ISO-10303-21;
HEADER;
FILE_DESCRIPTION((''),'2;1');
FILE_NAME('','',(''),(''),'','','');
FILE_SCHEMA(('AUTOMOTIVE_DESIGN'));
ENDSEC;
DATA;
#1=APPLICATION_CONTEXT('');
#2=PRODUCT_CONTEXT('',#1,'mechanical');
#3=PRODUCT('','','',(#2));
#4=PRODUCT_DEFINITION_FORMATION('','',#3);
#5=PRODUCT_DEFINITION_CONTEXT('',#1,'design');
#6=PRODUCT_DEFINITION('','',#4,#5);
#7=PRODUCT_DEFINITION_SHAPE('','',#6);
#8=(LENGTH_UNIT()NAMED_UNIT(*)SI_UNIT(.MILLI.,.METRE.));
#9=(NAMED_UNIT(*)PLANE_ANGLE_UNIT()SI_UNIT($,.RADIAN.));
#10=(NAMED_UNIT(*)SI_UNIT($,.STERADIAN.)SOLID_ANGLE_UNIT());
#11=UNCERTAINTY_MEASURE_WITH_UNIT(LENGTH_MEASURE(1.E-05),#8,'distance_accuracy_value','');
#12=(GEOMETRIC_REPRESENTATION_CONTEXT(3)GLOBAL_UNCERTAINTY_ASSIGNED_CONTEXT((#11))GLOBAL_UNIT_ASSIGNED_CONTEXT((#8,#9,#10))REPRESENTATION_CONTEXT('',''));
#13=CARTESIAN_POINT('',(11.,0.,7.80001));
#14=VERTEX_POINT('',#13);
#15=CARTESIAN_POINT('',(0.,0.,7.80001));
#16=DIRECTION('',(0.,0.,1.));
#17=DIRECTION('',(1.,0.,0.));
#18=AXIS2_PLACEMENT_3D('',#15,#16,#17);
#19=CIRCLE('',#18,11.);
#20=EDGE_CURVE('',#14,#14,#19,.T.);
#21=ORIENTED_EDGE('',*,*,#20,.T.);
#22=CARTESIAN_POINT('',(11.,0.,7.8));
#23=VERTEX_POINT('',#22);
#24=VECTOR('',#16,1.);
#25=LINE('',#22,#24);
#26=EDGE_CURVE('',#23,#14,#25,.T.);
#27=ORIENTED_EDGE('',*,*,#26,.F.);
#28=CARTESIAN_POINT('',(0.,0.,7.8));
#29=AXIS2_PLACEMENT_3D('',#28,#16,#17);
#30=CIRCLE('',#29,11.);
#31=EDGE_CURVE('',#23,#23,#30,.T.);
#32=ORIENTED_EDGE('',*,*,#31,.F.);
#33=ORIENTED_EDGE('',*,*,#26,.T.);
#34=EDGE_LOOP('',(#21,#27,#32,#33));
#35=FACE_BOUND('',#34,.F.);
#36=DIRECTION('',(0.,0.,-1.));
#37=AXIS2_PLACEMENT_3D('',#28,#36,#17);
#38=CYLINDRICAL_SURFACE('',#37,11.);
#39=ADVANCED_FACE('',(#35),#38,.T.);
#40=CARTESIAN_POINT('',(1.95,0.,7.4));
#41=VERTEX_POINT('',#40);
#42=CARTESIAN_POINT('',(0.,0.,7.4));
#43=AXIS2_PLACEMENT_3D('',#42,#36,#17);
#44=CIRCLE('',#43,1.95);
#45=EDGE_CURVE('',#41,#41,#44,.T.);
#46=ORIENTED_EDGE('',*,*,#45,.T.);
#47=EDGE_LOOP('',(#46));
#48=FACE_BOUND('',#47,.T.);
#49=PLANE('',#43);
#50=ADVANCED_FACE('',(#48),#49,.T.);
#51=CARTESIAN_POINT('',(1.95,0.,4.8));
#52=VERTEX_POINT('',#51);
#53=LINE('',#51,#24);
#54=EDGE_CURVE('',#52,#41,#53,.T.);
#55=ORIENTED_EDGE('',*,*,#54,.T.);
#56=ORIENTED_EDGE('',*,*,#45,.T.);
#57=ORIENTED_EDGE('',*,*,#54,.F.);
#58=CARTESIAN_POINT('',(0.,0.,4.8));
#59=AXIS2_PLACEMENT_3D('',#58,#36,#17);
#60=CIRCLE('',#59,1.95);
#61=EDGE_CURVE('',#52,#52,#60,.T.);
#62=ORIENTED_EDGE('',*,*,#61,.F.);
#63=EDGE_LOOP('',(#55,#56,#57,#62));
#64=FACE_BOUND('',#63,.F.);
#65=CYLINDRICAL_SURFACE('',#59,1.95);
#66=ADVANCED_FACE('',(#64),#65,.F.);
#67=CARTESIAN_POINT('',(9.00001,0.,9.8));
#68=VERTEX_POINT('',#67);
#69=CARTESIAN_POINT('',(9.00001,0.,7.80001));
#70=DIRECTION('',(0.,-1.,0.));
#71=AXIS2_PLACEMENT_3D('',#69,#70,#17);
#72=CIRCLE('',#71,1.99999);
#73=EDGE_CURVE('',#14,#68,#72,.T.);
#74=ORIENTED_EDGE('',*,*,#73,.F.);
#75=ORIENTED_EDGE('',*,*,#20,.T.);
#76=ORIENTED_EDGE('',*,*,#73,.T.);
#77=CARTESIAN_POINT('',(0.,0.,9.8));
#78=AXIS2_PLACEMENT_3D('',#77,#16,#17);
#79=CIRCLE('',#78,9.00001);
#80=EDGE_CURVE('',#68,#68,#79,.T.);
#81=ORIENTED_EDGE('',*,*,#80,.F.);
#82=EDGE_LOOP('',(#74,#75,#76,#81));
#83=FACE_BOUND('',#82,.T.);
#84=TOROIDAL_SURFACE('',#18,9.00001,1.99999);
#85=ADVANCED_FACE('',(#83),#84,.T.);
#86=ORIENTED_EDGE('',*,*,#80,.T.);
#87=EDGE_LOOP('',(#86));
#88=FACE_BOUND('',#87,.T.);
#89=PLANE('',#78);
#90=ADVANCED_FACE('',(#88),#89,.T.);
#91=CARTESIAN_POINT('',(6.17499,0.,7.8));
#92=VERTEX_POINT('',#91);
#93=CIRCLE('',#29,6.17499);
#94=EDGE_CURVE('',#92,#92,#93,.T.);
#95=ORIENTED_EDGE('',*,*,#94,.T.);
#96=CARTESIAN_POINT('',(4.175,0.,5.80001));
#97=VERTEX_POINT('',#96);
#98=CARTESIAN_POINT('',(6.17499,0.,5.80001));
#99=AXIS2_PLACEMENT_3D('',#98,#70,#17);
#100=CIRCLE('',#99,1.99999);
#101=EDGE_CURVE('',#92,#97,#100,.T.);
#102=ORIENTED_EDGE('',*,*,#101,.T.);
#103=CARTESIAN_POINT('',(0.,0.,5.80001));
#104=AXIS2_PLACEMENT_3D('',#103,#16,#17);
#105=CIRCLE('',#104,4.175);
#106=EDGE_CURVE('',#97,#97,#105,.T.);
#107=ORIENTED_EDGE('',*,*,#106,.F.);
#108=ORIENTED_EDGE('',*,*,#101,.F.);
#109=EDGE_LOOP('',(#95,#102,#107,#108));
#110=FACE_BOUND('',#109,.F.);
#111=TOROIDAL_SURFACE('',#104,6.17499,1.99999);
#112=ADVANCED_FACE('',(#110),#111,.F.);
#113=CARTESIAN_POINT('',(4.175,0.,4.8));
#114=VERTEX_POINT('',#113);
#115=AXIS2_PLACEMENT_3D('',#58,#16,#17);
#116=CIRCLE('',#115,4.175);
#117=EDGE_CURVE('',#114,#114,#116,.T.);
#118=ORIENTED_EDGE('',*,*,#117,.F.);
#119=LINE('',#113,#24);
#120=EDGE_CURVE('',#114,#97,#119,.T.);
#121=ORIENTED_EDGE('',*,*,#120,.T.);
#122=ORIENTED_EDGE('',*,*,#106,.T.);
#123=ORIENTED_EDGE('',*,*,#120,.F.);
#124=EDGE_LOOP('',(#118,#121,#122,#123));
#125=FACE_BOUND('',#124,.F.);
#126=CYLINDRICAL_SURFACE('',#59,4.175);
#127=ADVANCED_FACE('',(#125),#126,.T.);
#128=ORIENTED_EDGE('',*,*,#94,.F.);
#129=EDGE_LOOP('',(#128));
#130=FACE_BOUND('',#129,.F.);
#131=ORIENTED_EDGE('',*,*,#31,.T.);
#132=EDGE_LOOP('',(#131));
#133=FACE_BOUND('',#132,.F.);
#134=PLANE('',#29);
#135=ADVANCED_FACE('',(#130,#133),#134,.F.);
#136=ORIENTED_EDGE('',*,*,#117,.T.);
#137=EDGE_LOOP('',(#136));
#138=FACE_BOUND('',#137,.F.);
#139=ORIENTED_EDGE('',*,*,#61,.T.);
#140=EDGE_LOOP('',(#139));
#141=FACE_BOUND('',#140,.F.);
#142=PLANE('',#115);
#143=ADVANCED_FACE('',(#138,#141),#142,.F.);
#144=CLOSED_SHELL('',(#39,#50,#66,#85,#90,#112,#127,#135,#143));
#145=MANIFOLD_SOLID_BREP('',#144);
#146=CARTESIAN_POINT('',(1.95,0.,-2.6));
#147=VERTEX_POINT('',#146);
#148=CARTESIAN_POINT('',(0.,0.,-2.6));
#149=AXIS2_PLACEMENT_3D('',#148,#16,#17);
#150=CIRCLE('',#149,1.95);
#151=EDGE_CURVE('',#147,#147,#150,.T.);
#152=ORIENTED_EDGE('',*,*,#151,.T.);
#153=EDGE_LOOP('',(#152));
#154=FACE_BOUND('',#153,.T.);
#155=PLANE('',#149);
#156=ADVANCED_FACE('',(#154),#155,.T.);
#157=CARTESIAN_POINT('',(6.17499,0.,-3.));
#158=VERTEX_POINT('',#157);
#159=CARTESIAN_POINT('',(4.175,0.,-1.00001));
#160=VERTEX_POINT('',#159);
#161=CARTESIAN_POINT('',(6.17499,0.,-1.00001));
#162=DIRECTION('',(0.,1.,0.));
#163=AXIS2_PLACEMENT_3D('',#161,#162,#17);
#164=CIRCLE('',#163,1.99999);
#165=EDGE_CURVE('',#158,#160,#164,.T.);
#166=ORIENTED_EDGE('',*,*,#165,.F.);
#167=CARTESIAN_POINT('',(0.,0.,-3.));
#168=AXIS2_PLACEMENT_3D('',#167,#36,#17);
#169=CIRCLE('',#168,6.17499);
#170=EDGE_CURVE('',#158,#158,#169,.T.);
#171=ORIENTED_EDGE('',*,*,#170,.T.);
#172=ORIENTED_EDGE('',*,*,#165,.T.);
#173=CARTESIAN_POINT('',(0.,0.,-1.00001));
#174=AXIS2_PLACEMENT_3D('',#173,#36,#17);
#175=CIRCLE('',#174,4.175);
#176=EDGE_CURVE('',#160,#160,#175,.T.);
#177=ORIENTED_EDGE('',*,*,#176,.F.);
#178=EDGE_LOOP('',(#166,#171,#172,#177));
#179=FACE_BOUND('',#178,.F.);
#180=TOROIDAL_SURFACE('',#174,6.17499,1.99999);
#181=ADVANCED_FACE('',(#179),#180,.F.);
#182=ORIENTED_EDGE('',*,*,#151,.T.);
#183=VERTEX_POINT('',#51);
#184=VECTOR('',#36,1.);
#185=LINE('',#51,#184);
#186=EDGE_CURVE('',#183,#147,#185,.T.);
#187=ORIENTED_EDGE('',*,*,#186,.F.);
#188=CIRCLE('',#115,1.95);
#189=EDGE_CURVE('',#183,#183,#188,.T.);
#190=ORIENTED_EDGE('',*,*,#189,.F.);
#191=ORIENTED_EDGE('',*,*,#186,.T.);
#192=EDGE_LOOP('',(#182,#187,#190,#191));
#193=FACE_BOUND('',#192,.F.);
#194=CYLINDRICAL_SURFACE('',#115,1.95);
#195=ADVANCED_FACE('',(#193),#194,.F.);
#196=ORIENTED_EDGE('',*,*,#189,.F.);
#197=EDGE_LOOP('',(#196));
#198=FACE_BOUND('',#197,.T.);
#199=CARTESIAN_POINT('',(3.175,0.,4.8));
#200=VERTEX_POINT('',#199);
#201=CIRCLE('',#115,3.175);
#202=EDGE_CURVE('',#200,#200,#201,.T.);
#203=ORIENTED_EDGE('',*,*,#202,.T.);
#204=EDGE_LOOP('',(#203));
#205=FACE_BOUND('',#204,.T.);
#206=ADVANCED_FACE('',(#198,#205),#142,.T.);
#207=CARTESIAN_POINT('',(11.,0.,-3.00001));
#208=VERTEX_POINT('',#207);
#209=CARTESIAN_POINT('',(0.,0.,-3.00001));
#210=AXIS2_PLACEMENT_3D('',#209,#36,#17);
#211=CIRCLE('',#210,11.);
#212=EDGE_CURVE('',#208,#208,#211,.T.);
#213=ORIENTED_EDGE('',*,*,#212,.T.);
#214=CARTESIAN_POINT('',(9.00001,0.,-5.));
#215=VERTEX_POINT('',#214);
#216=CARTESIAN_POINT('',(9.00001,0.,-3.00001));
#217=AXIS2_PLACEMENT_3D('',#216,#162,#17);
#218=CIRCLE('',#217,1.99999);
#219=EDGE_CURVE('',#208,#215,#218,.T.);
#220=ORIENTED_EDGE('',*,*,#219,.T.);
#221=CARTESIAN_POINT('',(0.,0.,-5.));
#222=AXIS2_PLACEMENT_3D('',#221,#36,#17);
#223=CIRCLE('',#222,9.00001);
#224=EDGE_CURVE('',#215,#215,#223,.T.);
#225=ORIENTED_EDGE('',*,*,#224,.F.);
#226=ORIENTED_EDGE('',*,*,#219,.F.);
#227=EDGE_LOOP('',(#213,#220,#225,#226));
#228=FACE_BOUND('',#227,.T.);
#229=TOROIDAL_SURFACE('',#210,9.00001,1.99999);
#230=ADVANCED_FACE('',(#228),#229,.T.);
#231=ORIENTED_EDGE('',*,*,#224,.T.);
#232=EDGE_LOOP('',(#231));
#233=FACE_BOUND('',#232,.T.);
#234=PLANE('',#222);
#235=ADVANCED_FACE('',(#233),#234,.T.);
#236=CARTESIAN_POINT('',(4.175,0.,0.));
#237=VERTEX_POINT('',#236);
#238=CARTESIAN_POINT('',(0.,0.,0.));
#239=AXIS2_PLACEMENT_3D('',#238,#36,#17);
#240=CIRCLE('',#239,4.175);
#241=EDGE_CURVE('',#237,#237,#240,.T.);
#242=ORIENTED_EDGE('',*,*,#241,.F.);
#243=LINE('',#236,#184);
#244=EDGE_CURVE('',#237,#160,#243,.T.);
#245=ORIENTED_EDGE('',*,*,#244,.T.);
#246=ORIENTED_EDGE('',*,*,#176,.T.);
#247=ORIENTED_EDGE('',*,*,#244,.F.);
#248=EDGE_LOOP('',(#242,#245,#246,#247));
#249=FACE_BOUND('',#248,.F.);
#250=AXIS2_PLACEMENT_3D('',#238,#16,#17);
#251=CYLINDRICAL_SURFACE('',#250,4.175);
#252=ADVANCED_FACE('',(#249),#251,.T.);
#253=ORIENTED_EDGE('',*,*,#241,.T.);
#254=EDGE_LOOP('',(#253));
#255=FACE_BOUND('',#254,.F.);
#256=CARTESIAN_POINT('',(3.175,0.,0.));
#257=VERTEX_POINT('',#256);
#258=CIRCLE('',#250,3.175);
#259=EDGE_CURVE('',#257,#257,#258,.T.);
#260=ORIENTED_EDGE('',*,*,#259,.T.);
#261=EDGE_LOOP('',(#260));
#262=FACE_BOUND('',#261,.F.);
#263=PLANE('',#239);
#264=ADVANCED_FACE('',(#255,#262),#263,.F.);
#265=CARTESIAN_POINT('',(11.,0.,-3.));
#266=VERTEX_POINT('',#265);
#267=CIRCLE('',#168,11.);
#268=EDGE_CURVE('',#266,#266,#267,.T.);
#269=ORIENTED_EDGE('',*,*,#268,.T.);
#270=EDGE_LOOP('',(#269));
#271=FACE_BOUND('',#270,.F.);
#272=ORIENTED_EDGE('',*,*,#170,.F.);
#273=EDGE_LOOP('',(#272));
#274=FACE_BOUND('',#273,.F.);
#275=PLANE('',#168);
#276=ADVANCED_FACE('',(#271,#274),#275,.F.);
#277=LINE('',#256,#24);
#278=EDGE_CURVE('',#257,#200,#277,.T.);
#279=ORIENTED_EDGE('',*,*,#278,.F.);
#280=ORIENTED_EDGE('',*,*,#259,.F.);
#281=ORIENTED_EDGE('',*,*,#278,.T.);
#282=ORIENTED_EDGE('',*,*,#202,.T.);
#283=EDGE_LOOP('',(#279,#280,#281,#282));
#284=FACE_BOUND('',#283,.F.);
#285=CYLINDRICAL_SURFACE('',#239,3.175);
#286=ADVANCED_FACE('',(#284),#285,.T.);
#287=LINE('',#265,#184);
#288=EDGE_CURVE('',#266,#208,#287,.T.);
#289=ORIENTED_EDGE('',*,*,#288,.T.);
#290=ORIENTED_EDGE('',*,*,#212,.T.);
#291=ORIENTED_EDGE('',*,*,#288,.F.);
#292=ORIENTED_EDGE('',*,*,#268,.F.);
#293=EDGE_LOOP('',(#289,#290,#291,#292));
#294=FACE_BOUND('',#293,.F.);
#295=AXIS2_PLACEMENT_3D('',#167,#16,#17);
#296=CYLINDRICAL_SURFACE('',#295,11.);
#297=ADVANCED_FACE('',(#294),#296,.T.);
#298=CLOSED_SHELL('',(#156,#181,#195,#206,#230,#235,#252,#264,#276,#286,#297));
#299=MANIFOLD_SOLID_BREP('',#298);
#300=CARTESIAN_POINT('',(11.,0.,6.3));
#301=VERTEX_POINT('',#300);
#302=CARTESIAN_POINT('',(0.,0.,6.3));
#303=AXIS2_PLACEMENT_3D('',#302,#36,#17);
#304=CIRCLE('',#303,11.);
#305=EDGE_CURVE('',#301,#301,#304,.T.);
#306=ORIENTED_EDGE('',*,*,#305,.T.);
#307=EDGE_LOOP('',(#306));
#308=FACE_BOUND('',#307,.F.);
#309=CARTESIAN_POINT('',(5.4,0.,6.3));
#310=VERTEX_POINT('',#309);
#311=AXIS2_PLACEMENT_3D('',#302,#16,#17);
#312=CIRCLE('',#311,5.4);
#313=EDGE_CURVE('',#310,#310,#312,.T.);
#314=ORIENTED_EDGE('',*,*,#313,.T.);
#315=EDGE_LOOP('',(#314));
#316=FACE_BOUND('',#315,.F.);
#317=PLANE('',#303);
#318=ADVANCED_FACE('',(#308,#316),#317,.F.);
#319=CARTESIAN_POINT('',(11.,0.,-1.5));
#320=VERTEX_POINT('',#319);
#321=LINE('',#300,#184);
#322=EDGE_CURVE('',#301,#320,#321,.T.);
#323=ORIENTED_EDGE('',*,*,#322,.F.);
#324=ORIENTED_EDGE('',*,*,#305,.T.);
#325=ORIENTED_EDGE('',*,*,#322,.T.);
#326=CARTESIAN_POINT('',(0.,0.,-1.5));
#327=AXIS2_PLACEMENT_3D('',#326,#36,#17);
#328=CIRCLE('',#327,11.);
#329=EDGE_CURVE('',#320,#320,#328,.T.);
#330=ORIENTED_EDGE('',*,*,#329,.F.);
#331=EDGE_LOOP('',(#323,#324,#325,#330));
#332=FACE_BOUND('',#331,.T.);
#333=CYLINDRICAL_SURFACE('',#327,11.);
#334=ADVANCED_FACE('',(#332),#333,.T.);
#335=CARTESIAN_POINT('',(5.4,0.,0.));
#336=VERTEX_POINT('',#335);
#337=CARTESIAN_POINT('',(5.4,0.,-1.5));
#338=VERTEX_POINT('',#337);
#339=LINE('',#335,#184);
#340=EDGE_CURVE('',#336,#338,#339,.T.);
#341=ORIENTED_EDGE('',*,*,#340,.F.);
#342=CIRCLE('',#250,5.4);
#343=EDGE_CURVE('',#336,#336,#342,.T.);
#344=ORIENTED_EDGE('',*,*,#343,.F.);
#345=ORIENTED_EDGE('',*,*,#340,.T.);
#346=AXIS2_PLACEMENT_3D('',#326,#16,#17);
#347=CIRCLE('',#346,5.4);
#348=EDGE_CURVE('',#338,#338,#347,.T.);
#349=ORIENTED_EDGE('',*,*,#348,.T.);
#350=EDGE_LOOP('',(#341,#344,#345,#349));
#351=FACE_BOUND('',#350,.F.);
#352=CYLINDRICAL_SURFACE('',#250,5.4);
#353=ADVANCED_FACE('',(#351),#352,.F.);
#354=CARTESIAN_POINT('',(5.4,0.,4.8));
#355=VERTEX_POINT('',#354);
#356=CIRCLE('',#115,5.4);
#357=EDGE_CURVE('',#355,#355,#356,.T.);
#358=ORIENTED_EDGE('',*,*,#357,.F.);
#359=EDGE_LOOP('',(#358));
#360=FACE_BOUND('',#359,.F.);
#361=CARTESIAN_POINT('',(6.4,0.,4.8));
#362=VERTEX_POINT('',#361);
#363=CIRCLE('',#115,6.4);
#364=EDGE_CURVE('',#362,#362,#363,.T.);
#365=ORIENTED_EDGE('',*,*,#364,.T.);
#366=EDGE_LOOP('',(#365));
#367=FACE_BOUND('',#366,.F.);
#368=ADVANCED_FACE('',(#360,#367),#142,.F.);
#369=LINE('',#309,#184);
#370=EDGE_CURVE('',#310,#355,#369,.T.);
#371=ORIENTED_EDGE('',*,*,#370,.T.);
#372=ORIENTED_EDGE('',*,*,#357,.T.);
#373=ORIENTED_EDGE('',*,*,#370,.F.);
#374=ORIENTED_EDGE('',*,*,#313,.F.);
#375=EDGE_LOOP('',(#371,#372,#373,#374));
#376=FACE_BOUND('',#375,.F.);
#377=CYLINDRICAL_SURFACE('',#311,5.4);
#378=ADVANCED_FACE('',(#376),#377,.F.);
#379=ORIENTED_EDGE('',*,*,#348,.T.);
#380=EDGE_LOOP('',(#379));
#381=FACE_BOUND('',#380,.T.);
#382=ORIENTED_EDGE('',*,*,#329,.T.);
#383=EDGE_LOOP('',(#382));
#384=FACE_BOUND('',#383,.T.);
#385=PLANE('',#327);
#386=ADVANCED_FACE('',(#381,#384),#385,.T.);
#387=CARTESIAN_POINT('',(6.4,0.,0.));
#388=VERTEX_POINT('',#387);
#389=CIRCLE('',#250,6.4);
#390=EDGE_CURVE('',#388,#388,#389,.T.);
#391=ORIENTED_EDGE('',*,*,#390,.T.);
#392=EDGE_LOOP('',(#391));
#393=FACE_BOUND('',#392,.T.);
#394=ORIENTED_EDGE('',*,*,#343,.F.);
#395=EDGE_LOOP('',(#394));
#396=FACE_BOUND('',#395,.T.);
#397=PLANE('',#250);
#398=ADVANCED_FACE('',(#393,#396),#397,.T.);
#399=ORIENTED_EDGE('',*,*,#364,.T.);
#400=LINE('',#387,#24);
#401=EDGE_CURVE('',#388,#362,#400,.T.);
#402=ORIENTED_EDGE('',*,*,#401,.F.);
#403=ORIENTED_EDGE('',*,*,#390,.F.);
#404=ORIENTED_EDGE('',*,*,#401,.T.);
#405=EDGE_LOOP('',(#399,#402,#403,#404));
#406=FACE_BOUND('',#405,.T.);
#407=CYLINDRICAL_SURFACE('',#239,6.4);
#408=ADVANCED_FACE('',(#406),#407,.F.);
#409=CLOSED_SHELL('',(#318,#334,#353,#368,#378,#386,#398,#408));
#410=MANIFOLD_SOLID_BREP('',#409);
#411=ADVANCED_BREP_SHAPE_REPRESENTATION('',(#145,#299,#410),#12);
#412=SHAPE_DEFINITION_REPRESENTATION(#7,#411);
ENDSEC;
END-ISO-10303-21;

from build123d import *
from build123d import SkipClean  # not in build123d's __all__

# Parameters (mm, degrees)
F0_R      = 5.4
F1_DEPTH  = 1.5
F2_R      = 8.4
F2_R_2    = 6.4
F3_DEPTH  = 4.8
F4_R      = 11
F4_R_2    = 8.4
F5_DEPTH  = 7.8
F6_R      = 11
F6_R_2    = 5.4
F7_DEPTH  = 1.5
F8_R      = 3.175
F9_DEPTH  = 4.8
F10_R     = 4.175
F11_DEPTH = 3
F12_R     = 11
F13_DEPTH = 2
F14_R     = 1.95
F15_DEPTH = 7.4
F16_R     = 1.99999
F17_R     = 4.175
F18_DEPTH = 3
F19_R     = 11
F20_DEPTH = 2
F21_R     = 1.95
F22_DEPTH = 2.6
F23_R     = 1.99999


# Not quite as in the source:
# - a fillet or chamfer is up to 0.001 mm smaller than in the source, because OpenCascade refuses the exact size


with BuildPart() as f1:
    # F0 (on Top) → F1 (new body)
    with BuildSketch(Plane.XY):
        with BuildLine():
            ThreePointArc((2.5007633588, 8.0191135809), (0, 8.4), (-2.5007633588, 8.0191135809))
            ThreePointArc((-2.5007633588, 8.0191135809), (-7.2746133918, 4.2), (-8.1951377563, -1.8438321929))
            ThreePointArc((-8.1951377563, -1.8438321929), (-7.2746133918, -4.2), (-5.6943743975, -6.175281388))
            ThreePointArc((-5.6943743975, -6.175281388), (0, -8.4), (5.6943743975, -6.175281388))
            ThreePointArc((5.6943743975, -6.175281388), (7.2746133918, -4.2), (8.1951377563, -1.8438321929))
            ThreePointArc((8.1951377563, -1.8438321929), (7.2746133918, 4.2), (2.5007633588, 8.0191135809))
        make_face()
        Circle(F0_R, mode=Mode.SUBTRACT)
    extrude(amount=-F1_DEPTH)

    # F2 (on face) → F3 (join)
    with BuildSketch(Plane.XY):
        Circle(F2_R)
        Circle(F2_R_2, mode=Mode.SUBTRACT)
    with SkipClean():  # cleaning this boolean's faces spoils the solid; the shape is the same uncleaned
        extrude(amount=F3_DEPTH)



with BuildPart() as f5:
    # F4 (on face) → F5 (new body)
    with BuildSketch(Plane(origin=(0, 0, -1.5), x_dir=(1, 0, 0), z_dir=(0, 0, -1))):
        Circle(F4_R)
        Circle(F4_R_2, mode=Mode.SUBTRACT)
    extrude(amount=-F5_DEPTH)


with BuildPart() as f1_1:
    add(f1.part, clean=False)

    add(f5.part)  # F7 merges F5
    # F6 (on face) → F7 (join)
    with BuildSketch(Plane.XY.offset(6.3)):
        Circle(F6_R)
        Circle(F6_R_2, mode=Mode.SUBTRACT)
    extrude(amount=-F7_DEPTH)


with BuildPart() as f9:
    # F8 (on face) → F9 (new body)
    with BuildSketch(Plane.XY):
        Circle(F8_R)
    extrude(amount=F9_DEPTH)

    # F10 (on face) → F11 (join, through all)
    with BuildSketch(Plane(origin=(0, 0, 0), x_dir=(1, 0, 0), z_dir=(0, 0, -1))):
        Circle(F10_R)
    extrude(amount=F11_DEPTH)

    # F12 (on face) → F13 (join)
    with BuildSketch(Plane(origin=(0, 0, -3), x_dir=(1, 0, 0), z_dir=(0, 0, -1))):
        Circle(F12_R)
    extrude(amount=F13_DEPTH)

    # F14 (on face) → F15 (cut)
    with BuildSketch(Plane.XY.offset(4.8)):
        Circle(F14_R)
    extrude(amount=-F15_DEPTH, mode=Mode.SUBTRACT)

    # F16 (radius 2 in the source; OpenCascade refuses exactly that, so slightly less here)
    f16_edges = [f9.edges().sort_by_distance(p)[0] for p in [
        (-4.175, 0, -3),
        (-11, 0, -5),
    ]]
    fillet(f16_edges, radius=F16_R)


with BuildPart() as f18:
    # F17 (on face) → F18 (new body, through all)
    with BuildSketch(Plane.XY.offset(4.8)):
        Circle(F17_R)
    extrude(amount=F18_DEPTH)

    # F19 (on face) → F20 (join)
    with BuildSketch(Plane.XY.offset(7.8)):
        Circle(F19_R)
    extrude(amount=F20_DEPTH)

    # F21 (on face) → F22 (cut)
    with BuildSketch(Plane(origin=(0, 0, 4.8), x_dir=(1, 0, 0), z_dir=(0, 0, -1))):
        Circle(F21_R)
    extrude(amount=-F22_DEPTH, mode=Mode.SUBTRACT)

    # F23 (radius 2 in the source; OpenCascade refuses exactly that, so slightly less here)
    f23_edges = [f18.edges().sort_by_distance(p)[0] for p in [
        (-11, 0, 9.8),
        (-4.175, 0, 7.8),
    ]]
    fillet(f23_edges, radius=F23_R)


solid = Compound([f1_1.part, f9.part, f18.part])
